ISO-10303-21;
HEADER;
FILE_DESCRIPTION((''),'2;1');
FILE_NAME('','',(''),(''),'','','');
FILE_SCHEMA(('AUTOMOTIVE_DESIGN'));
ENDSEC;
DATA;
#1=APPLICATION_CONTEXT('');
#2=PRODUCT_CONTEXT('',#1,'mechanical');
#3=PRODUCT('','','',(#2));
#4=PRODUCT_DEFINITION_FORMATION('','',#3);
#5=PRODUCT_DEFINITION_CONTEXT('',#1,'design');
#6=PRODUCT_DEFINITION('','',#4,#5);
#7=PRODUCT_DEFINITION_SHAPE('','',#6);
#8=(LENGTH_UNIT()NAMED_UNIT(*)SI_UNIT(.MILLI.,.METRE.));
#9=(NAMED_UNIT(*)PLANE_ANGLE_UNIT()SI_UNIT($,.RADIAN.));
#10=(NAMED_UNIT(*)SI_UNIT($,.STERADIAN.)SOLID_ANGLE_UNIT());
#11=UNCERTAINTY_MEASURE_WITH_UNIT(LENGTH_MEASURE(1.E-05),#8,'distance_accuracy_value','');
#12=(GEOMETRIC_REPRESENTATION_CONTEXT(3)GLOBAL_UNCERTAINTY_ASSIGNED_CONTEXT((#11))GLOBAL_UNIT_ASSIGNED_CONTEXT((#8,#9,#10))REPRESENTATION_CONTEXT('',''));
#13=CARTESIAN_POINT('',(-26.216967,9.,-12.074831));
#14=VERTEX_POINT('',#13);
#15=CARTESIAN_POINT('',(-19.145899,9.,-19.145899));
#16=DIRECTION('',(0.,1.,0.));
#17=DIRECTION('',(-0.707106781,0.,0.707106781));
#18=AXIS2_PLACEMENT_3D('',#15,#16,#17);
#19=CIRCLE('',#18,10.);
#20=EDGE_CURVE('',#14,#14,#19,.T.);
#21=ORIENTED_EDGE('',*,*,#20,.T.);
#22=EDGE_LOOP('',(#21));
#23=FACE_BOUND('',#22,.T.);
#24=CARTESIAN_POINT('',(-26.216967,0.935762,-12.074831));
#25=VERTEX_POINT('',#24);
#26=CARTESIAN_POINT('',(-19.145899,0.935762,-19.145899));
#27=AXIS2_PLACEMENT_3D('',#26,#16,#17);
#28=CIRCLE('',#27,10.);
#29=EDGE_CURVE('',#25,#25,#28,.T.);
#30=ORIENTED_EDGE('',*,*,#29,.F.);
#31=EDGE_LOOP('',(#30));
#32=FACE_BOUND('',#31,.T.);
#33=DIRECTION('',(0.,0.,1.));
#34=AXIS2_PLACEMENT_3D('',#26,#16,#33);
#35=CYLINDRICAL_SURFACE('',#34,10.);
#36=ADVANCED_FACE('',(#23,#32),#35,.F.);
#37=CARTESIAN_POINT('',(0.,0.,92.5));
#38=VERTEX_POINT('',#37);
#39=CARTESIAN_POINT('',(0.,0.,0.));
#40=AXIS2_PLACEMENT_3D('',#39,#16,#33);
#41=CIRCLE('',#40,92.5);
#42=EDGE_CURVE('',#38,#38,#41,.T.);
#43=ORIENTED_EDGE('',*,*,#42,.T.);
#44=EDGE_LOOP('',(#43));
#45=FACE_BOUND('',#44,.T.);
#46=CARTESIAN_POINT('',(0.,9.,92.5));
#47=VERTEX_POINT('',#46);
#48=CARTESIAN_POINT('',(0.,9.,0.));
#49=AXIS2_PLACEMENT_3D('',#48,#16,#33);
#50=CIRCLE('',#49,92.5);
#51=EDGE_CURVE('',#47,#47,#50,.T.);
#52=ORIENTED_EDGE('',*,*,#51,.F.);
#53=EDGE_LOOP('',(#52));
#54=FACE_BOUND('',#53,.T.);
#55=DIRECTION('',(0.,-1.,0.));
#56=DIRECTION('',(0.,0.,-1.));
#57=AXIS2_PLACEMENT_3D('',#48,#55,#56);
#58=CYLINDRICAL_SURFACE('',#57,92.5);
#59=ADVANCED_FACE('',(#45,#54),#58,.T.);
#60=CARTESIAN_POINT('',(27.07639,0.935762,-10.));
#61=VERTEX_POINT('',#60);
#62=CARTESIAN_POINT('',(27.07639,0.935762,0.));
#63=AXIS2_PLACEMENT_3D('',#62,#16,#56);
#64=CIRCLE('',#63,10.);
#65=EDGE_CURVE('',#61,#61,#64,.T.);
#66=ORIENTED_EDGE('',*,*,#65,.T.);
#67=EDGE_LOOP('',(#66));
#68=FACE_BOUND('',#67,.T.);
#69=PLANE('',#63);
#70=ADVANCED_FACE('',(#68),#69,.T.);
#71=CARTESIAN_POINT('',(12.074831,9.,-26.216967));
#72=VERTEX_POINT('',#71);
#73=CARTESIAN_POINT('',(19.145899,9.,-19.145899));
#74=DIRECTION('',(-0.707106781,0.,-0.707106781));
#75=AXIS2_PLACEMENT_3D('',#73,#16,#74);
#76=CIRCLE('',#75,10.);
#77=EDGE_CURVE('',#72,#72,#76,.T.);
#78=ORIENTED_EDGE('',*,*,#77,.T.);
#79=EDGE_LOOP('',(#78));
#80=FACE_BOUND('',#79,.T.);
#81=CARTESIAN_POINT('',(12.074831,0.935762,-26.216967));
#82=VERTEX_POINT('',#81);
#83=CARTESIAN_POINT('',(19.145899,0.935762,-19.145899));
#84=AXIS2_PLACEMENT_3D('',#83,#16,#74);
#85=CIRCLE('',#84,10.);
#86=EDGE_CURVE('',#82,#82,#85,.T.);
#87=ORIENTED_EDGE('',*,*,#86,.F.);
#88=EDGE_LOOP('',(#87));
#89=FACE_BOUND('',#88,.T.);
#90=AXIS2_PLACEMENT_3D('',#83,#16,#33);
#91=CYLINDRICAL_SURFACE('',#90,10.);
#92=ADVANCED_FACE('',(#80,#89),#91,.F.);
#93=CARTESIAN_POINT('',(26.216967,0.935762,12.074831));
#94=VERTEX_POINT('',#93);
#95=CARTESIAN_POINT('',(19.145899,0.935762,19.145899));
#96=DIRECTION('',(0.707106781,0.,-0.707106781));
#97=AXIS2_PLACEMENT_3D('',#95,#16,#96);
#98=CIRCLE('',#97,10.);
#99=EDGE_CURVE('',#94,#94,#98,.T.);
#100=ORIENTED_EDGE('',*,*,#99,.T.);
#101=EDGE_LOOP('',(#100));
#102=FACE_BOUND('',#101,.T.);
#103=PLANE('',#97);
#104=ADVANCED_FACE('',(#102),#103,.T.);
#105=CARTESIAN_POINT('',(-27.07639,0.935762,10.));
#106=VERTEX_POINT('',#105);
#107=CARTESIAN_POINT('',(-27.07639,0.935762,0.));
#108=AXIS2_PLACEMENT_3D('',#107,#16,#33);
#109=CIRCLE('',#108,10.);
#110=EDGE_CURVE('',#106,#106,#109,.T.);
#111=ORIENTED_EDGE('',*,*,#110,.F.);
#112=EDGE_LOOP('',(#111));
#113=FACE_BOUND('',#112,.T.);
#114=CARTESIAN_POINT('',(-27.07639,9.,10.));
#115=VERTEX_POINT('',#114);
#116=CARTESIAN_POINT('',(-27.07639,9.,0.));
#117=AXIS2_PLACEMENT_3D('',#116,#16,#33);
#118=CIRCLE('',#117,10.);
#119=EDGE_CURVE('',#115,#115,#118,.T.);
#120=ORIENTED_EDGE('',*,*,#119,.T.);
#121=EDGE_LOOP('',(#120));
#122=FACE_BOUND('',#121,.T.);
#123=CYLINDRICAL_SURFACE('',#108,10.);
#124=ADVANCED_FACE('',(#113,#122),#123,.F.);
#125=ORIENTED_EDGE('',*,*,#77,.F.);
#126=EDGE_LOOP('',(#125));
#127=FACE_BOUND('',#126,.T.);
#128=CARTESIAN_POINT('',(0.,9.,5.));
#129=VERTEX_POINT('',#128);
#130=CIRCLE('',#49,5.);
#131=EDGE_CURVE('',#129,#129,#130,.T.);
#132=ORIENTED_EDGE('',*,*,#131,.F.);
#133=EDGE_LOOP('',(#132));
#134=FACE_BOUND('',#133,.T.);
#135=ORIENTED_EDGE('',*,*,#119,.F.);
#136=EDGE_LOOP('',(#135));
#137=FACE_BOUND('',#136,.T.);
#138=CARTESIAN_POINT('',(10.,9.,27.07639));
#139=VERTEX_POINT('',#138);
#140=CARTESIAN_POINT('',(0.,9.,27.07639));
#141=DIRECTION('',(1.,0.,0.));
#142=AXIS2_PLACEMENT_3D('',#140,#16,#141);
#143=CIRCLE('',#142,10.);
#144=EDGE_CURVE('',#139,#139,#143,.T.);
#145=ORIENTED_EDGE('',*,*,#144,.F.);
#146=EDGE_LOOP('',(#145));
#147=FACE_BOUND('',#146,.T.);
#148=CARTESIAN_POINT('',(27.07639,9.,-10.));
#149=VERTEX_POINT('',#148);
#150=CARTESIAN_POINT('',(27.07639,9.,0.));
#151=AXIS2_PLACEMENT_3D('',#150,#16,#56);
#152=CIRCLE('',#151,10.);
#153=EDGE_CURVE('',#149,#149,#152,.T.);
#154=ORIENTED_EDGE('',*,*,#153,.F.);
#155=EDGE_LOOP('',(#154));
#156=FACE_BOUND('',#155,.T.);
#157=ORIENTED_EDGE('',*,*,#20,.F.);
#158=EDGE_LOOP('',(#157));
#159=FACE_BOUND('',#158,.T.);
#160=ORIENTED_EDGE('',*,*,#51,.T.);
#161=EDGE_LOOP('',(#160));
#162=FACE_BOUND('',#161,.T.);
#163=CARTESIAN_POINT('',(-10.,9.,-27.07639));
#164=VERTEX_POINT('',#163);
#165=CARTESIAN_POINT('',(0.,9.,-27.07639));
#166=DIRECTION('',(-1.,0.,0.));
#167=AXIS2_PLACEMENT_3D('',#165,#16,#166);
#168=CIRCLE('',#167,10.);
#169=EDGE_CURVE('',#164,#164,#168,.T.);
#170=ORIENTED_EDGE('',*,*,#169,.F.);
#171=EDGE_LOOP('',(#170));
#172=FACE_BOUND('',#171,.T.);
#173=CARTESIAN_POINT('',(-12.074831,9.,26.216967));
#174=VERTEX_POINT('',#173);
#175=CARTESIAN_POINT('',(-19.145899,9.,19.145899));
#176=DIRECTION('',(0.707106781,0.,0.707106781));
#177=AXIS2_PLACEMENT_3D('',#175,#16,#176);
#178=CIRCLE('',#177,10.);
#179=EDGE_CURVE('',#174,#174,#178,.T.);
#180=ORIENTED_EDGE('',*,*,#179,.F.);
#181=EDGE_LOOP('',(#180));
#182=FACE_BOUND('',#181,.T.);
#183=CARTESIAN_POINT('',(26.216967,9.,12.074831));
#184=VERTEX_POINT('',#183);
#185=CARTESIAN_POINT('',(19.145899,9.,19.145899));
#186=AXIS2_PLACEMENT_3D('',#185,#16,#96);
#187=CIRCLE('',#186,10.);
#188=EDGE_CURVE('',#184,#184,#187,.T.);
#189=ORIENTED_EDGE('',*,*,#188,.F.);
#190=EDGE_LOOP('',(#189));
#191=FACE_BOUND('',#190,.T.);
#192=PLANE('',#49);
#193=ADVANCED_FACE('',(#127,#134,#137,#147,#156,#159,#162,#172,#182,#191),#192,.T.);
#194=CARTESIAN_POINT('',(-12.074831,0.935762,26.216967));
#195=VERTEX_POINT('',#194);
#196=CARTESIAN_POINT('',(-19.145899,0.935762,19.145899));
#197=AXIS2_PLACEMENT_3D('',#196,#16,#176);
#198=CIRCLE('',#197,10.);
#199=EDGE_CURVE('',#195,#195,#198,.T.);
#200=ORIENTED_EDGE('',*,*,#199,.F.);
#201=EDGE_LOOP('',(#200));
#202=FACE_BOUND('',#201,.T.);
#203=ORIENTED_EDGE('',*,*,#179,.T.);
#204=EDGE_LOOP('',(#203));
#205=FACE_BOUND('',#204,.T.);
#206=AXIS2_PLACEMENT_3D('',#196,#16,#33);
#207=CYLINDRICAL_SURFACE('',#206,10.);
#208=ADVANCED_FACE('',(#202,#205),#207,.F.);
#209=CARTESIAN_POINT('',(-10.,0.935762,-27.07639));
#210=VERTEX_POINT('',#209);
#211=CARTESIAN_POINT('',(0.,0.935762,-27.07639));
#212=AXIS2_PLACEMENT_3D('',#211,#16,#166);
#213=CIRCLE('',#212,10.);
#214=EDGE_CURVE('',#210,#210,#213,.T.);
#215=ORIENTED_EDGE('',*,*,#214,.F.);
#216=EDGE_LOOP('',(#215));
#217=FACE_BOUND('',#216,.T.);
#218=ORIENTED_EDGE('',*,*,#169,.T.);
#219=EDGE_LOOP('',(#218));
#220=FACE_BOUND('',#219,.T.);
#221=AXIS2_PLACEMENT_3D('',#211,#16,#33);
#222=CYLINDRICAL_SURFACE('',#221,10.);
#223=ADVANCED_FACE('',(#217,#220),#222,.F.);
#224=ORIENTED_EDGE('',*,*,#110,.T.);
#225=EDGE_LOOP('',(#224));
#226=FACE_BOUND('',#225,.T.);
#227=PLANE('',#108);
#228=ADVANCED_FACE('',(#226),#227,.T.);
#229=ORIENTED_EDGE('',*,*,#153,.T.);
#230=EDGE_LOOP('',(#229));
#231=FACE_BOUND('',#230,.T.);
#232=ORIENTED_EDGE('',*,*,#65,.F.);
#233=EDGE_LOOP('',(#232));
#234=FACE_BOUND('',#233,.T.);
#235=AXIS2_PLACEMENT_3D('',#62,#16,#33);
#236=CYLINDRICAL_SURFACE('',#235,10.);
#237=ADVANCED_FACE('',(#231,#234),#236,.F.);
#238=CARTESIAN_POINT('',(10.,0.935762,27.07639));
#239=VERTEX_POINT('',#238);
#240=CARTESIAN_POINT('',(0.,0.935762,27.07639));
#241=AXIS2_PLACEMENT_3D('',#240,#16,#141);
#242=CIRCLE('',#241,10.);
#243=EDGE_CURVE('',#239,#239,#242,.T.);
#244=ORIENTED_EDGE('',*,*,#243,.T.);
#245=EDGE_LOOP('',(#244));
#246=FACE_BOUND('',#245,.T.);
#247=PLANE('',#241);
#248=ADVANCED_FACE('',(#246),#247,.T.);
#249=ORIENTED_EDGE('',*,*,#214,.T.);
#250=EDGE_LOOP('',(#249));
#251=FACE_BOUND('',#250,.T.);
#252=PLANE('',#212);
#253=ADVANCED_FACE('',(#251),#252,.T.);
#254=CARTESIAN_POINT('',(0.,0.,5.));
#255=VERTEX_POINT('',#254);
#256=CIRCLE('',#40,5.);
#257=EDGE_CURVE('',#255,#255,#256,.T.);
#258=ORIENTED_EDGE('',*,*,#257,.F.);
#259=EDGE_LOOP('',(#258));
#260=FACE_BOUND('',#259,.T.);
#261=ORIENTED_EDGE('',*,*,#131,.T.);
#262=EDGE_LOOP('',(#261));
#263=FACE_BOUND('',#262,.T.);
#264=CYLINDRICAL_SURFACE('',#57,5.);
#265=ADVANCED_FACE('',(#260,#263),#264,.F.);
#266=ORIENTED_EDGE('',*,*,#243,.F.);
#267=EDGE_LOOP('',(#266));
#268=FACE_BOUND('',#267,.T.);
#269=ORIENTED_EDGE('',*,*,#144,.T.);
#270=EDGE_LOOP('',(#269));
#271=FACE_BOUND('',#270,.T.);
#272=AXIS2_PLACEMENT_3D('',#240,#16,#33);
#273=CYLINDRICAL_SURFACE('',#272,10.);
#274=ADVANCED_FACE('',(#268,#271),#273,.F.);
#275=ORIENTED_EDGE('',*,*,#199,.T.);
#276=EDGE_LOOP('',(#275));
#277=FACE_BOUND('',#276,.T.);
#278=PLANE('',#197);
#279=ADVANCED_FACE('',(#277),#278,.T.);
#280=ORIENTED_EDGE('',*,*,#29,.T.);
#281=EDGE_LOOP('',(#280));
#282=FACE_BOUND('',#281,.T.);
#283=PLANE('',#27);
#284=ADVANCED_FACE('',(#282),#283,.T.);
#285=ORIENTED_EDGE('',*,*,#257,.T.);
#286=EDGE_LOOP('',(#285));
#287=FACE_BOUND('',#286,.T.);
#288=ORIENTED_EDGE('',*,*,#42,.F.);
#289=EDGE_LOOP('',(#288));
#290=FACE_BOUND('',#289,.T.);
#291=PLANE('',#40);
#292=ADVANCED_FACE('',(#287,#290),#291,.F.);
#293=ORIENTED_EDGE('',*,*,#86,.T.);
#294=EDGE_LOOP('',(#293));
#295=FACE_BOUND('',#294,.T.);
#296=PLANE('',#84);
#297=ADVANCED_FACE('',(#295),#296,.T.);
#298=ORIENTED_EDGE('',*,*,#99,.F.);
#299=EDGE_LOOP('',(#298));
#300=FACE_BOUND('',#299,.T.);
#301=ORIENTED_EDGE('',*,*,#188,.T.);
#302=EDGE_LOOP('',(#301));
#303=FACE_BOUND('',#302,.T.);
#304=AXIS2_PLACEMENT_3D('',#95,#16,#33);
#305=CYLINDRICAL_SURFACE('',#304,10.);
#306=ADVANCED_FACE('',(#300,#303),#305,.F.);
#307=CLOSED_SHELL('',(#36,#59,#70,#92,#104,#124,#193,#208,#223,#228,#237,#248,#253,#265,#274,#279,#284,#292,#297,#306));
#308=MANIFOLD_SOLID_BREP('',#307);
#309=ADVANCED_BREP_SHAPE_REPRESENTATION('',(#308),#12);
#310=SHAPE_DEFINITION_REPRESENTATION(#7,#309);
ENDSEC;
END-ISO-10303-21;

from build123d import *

# Parameters (mm, degrees)
SKETCH1_R           = 92.5
BOSS_EXTRUDE1_DEPTH = 9
SKETCH2_R           = 5
CUT_EXTRUDE1_DEPTH  = 132.123987127
SKETCH3_R           = 10
CUT_EXTRUDE2_DEPTH  = 8.064238178
CIRPATTERN1_COUNT   = 8


with BuildPart() as part:
    # Sketch1 → Boss-Extrude1 (new body)
    with BuildSketch(Plane(origin=(0, 0, 0), x_dir=(1, 0, 0), z_dir=(0, 1, 0))):
        Circle(SKETCH1_R)
    extrude(amount=BOSS_EXTRUDE1_DEPTH)

    # Sketch2 → Cut-Extrude1 (cut, through all)
    with BuildSketch(Plane(origin=(0, 0, 0), x_dir=(1, 0, 0), z_dir=(0, 1, 0))):
        Circle(SKETCH2_R)
    extrude(amount=CUT_EXTRUDE1_DEPTH, mode=Mode.SUBTRACT)

    # Sketch3 → Cut-Extrude2 (cut)
    with BuildSketch(Plane(origin=(0, 9, 0), x_dir=(1, 0, 0), z_dir=(0, 1, 0))):
        with Locations((-27.076389824, 0)):
            Circle(SKETCH3_R)
    cut_extrude2 = extrude(amount=-CUT_EXTRUDE2_DEPTH, mode=Mode.SUBTRACT)

    # CirPattern1: Cut-Extrude2 ×8 about axis
    cirpattern1_axis = Axis((0, 0, 0), (0, 1, 0))
    for i in range(1, CIRPATTERN1_COUNT):
        add(cut_extrude2.rotate(cirpattern1_axis, i * 360 / CIRPATTERN1_COUNT), mode=Mode.SUBTRACT)


solid = part.part
